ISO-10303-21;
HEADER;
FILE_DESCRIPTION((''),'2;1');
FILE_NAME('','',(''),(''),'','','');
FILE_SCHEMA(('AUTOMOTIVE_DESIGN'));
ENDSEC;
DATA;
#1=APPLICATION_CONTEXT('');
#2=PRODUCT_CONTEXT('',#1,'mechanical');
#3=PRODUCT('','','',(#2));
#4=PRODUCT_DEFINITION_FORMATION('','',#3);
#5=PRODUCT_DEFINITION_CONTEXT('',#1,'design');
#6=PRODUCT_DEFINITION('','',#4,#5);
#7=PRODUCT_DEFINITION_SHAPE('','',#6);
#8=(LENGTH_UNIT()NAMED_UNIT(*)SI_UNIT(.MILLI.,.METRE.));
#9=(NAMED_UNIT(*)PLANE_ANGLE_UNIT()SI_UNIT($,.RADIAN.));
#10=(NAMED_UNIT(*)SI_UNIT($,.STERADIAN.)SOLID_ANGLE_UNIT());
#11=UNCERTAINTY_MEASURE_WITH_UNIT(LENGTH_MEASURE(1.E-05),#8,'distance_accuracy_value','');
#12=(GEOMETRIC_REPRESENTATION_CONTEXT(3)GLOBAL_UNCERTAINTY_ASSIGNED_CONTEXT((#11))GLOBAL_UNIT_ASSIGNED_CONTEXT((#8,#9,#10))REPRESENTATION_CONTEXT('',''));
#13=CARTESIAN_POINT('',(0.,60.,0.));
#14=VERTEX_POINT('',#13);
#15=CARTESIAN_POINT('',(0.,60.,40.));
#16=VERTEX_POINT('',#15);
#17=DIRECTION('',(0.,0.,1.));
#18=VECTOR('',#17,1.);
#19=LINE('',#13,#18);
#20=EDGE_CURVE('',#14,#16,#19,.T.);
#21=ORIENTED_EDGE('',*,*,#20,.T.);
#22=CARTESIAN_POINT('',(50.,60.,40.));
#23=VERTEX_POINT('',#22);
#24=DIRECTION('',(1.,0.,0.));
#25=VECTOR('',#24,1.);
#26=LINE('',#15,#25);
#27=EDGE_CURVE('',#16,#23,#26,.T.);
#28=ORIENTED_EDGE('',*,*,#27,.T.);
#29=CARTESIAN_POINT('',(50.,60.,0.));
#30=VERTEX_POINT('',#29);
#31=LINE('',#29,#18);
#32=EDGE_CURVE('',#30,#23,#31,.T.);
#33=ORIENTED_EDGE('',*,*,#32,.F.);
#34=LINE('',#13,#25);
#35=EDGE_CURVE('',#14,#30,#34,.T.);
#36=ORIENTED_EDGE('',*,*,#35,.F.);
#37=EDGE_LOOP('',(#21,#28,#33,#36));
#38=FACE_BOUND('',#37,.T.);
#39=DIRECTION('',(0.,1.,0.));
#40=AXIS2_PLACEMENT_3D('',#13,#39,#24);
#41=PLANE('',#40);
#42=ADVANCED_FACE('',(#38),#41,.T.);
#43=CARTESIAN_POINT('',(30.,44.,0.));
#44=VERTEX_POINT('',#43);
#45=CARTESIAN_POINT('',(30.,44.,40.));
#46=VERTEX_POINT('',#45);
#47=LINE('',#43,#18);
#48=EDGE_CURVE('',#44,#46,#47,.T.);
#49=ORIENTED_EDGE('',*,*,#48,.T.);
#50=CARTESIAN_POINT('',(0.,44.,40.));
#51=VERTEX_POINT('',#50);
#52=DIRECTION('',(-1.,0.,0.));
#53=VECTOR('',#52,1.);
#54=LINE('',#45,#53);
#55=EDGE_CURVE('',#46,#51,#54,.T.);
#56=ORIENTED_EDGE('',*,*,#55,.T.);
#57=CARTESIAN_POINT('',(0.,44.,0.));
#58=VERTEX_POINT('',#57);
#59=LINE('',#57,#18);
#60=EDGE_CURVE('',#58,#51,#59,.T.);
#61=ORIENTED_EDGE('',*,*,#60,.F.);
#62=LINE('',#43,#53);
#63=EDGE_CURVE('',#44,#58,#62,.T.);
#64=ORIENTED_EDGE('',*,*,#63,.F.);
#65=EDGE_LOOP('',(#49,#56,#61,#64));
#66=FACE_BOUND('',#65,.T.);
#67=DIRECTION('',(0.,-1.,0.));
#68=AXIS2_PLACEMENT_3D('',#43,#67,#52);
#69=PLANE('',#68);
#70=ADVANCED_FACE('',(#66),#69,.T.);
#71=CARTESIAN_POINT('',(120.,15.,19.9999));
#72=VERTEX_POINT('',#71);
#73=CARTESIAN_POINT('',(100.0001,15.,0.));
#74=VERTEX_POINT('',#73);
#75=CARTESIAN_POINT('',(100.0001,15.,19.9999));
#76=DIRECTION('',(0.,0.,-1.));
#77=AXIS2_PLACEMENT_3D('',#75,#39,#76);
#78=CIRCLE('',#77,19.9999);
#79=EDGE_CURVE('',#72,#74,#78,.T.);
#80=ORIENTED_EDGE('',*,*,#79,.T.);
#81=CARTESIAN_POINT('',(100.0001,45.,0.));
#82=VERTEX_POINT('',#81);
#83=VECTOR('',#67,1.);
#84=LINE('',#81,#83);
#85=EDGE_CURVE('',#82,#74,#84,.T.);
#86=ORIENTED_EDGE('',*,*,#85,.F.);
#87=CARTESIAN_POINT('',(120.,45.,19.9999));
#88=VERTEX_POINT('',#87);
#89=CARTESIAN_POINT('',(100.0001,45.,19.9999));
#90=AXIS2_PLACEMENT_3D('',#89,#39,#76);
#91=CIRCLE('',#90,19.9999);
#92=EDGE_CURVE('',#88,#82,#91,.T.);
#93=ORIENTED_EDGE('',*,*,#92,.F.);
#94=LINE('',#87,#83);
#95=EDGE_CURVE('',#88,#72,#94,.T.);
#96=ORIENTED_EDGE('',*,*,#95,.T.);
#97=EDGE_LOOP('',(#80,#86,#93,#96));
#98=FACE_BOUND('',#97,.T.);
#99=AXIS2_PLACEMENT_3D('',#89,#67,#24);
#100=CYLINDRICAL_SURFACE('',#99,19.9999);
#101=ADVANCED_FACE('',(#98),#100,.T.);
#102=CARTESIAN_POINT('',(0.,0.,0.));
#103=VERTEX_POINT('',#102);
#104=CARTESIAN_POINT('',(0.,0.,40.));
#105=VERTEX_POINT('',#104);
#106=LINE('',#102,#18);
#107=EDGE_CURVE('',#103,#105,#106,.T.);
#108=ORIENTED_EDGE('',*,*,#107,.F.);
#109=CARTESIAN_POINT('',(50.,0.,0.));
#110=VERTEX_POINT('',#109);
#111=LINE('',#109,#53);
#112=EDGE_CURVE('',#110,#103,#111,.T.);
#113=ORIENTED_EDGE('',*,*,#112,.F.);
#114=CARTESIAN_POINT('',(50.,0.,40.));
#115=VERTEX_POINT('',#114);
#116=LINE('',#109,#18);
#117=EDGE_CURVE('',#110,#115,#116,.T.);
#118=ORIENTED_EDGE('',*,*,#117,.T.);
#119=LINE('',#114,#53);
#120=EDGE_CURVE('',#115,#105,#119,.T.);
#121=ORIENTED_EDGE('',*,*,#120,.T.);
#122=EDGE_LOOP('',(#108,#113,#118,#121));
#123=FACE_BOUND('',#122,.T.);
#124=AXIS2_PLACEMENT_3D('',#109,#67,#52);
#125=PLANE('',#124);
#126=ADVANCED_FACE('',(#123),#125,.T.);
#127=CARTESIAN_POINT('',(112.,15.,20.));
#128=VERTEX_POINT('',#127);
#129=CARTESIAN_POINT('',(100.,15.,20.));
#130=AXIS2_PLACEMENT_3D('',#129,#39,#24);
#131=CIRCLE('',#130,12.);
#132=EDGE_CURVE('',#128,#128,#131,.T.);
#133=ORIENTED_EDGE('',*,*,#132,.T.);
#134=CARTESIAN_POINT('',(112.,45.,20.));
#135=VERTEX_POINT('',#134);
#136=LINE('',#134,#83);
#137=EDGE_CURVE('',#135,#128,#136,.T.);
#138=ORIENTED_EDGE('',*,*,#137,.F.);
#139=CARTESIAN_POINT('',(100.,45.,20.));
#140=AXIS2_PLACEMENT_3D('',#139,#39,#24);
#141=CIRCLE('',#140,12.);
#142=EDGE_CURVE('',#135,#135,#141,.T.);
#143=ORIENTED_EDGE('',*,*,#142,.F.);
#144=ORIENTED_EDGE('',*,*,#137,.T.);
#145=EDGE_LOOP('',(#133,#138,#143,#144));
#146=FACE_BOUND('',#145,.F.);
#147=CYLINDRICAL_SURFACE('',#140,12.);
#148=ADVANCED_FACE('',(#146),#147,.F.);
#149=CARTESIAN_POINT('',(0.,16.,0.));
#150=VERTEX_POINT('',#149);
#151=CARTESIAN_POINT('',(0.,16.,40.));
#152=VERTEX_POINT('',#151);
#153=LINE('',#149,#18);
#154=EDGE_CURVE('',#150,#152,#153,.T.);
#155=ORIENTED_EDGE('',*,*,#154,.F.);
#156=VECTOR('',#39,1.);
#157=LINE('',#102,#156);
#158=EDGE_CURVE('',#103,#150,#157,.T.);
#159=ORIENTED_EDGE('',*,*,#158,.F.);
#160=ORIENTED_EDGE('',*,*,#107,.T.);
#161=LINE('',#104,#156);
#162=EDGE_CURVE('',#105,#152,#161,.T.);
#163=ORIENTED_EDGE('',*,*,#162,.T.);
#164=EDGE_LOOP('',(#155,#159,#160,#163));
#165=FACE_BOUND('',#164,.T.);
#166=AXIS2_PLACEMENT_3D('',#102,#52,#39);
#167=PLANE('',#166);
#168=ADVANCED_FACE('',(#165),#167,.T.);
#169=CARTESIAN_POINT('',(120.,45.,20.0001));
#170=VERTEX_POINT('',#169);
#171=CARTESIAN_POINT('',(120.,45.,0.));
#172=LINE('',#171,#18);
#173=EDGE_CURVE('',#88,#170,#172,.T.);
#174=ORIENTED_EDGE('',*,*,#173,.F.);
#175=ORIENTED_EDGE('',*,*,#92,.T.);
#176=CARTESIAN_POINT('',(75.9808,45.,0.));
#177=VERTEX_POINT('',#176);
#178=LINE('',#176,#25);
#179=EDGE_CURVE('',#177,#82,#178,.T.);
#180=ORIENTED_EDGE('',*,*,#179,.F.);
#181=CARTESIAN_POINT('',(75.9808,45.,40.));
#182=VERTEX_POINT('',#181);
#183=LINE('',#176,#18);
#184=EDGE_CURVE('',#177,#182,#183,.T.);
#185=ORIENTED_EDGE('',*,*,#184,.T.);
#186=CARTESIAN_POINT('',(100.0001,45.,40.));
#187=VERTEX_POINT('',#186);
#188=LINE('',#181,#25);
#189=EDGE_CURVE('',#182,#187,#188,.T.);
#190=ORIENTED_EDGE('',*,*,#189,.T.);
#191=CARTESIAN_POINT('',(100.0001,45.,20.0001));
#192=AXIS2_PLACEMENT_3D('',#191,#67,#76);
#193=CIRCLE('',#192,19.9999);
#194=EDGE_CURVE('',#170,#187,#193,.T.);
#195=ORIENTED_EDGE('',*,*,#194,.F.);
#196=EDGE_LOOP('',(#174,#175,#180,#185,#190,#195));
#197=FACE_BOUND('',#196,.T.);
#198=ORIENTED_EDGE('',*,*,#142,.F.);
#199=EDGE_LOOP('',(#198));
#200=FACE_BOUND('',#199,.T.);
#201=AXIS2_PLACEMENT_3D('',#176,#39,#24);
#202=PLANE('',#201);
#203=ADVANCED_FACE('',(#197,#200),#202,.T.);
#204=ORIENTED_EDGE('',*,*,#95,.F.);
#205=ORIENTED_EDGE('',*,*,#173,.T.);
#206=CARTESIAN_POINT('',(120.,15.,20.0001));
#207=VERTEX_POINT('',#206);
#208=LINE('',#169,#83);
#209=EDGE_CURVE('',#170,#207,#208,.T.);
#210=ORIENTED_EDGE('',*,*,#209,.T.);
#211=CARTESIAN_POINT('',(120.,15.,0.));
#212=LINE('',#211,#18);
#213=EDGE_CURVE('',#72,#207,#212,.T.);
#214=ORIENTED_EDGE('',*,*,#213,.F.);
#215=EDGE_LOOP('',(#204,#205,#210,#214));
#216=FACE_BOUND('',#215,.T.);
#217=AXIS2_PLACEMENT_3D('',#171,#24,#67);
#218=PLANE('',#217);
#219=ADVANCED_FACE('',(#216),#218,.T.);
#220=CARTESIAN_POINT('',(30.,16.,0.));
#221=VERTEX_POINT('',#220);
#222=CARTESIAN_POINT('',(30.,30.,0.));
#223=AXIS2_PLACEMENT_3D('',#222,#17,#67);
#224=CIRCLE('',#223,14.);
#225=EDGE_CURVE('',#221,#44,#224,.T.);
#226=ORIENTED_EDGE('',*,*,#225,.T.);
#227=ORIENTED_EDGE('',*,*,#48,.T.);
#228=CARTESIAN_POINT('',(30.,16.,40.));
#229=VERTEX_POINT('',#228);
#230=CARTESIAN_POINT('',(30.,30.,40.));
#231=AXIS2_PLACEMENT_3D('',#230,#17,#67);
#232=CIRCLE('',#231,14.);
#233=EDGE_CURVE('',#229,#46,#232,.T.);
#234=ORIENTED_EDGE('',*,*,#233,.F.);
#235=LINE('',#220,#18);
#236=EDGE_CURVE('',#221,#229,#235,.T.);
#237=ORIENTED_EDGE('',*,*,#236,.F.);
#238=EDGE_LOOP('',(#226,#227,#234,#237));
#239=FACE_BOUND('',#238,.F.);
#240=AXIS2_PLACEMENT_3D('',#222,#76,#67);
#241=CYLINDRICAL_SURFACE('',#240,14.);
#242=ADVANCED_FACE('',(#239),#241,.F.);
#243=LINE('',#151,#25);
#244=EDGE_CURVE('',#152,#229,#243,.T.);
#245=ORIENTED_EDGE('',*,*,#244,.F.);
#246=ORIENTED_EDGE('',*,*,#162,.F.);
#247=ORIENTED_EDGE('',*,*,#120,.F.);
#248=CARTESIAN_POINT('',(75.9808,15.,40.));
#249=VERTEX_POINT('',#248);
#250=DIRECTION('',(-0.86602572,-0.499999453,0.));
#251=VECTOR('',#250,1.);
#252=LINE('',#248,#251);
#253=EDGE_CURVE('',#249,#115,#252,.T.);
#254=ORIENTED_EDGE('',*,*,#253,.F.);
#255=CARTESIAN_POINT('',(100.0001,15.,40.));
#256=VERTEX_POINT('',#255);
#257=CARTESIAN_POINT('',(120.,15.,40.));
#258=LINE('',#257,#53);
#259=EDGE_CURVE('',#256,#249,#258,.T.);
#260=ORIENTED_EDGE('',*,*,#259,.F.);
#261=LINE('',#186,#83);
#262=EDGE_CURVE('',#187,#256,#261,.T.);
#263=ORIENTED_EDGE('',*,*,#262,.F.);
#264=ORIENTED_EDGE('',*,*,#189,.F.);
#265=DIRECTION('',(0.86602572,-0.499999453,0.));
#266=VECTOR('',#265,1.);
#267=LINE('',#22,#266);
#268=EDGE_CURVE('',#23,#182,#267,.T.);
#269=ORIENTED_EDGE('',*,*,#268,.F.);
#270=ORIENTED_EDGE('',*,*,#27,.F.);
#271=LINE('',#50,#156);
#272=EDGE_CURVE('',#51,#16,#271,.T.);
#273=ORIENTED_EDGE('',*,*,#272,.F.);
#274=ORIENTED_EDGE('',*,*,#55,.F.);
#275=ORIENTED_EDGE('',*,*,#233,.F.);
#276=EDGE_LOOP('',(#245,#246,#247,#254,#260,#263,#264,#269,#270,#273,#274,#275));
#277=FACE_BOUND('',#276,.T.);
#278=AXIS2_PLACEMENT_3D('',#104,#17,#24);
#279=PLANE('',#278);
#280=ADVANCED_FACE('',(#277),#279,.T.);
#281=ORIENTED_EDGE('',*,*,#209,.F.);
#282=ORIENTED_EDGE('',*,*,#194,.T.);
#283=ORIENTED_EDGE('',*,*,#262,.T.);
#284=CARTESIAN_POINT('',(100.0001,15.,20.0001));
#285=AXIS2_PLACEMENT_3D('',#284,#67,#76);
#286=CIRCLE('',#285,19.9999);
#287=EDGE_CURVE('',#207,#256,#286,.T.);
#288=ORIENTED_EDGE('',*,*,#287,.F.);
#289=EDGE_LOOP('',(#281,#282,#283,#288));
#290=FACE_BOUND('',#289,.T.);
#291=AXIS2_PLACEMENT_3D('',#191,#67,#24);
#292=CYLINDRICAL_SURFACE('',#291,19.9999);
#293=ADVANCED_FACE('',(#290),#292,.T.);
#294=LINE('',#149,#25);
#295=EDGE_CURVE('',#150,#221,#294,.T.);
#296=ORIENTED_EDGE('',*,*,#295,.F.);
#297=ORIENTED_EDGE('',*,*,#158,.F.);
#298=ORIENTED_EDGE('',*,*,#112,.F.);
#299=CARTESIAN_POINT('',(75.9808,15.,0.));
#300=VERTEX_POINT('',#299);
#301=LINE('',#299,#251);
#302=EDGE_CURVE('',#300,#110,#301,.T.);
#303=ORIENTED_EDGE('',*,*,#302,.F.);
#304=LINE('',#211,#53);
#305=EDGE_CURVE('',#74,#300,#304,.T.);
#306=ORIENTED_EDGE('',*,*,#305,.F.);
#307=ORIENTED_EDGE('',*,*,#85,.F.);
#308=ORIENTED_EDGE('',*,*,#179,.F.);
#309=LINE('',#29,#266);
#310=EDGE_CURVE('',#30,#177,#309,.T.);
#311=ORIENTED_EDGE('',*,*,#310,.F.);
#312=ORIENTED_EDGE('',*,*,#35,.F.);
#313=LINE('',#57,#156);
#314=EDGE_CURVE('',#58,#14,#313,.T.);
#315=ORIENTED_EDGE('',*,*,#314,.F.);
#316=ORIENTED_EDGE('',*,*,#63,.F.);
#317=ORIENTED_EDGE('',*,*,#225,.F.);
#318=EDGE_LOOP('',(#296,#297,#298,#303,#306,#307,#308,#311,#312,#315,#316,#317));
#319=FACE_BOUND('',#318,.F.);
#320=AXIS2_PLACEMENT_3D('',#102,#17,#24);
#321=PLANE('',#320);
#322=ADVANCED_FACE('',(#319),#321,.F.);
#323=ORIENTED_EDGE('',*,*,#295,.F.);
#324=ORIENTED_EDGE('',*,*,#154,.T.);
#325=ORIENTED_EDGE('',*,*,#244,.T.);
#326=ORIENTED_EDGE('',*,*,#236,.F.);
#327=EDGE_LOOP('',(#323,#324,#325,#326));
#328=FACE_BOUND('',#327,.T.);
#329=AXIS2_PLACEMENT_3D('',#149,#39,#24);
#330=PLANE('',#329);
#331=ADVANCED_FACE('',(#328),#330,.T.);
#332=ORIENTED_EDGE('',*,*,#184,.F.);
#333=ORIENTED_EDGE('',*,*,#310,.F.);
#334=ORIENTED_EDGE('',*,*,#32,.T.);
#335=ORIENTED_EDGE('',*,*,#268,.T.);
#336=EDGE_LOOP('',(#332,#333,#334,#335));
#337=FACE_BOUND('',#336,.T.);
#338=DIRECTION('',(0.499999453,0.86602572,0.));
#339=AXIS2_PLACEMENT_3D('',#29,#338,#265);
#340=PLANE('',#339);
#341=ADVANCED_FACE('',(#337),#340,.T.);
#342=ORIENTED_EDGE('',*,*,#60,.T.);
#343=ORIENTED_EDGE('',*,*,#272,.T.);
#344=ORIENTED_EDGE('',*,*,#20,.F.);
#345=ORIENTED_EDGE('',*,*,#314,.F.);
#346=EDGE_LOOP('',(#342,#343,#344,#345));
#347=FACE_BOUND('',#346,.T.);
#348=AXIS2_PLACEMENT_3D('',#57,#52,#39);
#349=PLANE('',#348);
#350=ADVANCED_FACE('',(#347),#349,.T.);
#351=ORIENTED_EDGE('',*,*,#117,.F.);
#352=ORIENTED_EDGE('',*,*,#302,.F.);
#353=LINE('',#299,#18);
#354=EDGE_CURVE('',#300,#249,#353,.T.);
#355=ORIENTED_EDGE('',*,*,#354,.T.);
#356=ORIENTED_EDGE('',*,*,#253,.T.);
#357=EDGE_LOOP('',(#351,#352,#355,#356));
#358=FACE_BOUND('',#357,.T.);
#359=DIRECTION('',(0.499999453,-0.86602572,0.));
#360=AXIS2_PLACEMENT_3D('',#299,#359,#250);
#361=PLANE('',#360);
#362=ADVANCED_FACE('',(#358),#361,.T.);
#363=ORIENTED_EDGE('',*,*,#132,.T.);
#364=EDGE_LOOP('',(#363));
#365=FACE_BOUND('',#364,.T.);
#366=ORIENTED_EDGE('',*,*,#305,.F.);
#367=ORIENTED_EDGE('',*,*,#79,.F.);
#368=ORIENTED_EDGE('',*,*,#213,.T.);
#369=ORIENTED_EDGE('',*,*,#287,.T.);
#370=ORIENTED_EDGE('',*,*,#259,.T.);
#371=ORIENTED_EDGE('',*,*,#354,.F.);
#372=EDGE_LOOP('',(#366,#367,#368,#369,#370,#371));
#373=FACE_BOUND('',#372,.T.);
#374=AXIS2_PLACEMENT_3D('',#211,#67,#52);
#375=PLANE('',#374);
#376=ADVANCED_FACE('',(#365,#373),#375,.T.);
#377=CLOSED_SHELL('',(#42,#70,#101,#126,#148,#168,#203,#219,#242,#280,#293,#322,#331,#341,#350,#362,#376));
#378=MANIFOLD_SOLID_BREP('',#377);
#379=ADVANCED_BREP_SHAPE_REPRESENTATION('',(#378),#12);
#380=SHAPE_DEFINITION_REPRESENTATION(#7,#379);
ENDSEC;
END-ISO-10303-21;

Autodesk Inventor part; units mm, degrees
ref_plane "YZ Plane" through (0, 0, 0) normal (1, 0, 0) x (0, 1, 0)
ref_plane "XZ Plane" through (0, 0, 0) normal (0, 1, 0) x (-1, 0, 0)
ref_plane "XY Plane" through (0, 0, 0) normal (0, 0, 1) x (1, 0, 0)
sketch "草圖1" plane through (0, 0, 0) normal (0, 0, 1) x (1, 0, 0)
  line L0 (0, 0) -> (0, 16)
  line L1 (0, 16) -> (30, 16)
  line L2 (30, 44) -> (0, 44)
  line L3 (0, 44) -> (0, 60)
  line L4 (0, 60) -> (50, 60)
  line L5 (50, 60) -> (75.9808, 45)
  line L6 (75.9808, 45) -> (120, 45)
  line L7 (120, 45) -> (120, 15)
  line L8 (120, 15) -> (75.9808, 15)
  line L9 (75.9808, 15) -> (50, 0)
  line L10 (50, 0) -> (0, 0)
  arc A0 (30, 16) -> (30, 44) centre (30, 30) ccw
  dimension "d0" = 60
  dimension "d1" = 50
  dimension "d3" = 30
  dimension "d5" = 30
  dimension "d6" = 120
  dimension "d8" = 28
  dimension "d10" = 16
  dimension "d13" = 50
  dimension "d25" = 45
  dimension "d26" = 30
  dimension "d27" = 30
extrude "擠出1" add sketch "草圖1" along normal blind 40
fillet "圓角1" radius 20 2 edges at (120, 30, 40) (120, 30, 0)
sketch "草圖2" plane through (75.9808, 45, 40) normal (0, 1, 0) x (1, 0, 0)
  arc A0 (24.0192, 0) -> (24.0192, 40) centre (24.0192, 20) ccw projected
  circle A1 centre (24.0192, 20) radius 12
  point P0 (-75.9808, 40)
  dimension "d49" = 24
extrude "擠出2" cut sketch "草圖2" against normal blind 40
properties part number "複習一"
